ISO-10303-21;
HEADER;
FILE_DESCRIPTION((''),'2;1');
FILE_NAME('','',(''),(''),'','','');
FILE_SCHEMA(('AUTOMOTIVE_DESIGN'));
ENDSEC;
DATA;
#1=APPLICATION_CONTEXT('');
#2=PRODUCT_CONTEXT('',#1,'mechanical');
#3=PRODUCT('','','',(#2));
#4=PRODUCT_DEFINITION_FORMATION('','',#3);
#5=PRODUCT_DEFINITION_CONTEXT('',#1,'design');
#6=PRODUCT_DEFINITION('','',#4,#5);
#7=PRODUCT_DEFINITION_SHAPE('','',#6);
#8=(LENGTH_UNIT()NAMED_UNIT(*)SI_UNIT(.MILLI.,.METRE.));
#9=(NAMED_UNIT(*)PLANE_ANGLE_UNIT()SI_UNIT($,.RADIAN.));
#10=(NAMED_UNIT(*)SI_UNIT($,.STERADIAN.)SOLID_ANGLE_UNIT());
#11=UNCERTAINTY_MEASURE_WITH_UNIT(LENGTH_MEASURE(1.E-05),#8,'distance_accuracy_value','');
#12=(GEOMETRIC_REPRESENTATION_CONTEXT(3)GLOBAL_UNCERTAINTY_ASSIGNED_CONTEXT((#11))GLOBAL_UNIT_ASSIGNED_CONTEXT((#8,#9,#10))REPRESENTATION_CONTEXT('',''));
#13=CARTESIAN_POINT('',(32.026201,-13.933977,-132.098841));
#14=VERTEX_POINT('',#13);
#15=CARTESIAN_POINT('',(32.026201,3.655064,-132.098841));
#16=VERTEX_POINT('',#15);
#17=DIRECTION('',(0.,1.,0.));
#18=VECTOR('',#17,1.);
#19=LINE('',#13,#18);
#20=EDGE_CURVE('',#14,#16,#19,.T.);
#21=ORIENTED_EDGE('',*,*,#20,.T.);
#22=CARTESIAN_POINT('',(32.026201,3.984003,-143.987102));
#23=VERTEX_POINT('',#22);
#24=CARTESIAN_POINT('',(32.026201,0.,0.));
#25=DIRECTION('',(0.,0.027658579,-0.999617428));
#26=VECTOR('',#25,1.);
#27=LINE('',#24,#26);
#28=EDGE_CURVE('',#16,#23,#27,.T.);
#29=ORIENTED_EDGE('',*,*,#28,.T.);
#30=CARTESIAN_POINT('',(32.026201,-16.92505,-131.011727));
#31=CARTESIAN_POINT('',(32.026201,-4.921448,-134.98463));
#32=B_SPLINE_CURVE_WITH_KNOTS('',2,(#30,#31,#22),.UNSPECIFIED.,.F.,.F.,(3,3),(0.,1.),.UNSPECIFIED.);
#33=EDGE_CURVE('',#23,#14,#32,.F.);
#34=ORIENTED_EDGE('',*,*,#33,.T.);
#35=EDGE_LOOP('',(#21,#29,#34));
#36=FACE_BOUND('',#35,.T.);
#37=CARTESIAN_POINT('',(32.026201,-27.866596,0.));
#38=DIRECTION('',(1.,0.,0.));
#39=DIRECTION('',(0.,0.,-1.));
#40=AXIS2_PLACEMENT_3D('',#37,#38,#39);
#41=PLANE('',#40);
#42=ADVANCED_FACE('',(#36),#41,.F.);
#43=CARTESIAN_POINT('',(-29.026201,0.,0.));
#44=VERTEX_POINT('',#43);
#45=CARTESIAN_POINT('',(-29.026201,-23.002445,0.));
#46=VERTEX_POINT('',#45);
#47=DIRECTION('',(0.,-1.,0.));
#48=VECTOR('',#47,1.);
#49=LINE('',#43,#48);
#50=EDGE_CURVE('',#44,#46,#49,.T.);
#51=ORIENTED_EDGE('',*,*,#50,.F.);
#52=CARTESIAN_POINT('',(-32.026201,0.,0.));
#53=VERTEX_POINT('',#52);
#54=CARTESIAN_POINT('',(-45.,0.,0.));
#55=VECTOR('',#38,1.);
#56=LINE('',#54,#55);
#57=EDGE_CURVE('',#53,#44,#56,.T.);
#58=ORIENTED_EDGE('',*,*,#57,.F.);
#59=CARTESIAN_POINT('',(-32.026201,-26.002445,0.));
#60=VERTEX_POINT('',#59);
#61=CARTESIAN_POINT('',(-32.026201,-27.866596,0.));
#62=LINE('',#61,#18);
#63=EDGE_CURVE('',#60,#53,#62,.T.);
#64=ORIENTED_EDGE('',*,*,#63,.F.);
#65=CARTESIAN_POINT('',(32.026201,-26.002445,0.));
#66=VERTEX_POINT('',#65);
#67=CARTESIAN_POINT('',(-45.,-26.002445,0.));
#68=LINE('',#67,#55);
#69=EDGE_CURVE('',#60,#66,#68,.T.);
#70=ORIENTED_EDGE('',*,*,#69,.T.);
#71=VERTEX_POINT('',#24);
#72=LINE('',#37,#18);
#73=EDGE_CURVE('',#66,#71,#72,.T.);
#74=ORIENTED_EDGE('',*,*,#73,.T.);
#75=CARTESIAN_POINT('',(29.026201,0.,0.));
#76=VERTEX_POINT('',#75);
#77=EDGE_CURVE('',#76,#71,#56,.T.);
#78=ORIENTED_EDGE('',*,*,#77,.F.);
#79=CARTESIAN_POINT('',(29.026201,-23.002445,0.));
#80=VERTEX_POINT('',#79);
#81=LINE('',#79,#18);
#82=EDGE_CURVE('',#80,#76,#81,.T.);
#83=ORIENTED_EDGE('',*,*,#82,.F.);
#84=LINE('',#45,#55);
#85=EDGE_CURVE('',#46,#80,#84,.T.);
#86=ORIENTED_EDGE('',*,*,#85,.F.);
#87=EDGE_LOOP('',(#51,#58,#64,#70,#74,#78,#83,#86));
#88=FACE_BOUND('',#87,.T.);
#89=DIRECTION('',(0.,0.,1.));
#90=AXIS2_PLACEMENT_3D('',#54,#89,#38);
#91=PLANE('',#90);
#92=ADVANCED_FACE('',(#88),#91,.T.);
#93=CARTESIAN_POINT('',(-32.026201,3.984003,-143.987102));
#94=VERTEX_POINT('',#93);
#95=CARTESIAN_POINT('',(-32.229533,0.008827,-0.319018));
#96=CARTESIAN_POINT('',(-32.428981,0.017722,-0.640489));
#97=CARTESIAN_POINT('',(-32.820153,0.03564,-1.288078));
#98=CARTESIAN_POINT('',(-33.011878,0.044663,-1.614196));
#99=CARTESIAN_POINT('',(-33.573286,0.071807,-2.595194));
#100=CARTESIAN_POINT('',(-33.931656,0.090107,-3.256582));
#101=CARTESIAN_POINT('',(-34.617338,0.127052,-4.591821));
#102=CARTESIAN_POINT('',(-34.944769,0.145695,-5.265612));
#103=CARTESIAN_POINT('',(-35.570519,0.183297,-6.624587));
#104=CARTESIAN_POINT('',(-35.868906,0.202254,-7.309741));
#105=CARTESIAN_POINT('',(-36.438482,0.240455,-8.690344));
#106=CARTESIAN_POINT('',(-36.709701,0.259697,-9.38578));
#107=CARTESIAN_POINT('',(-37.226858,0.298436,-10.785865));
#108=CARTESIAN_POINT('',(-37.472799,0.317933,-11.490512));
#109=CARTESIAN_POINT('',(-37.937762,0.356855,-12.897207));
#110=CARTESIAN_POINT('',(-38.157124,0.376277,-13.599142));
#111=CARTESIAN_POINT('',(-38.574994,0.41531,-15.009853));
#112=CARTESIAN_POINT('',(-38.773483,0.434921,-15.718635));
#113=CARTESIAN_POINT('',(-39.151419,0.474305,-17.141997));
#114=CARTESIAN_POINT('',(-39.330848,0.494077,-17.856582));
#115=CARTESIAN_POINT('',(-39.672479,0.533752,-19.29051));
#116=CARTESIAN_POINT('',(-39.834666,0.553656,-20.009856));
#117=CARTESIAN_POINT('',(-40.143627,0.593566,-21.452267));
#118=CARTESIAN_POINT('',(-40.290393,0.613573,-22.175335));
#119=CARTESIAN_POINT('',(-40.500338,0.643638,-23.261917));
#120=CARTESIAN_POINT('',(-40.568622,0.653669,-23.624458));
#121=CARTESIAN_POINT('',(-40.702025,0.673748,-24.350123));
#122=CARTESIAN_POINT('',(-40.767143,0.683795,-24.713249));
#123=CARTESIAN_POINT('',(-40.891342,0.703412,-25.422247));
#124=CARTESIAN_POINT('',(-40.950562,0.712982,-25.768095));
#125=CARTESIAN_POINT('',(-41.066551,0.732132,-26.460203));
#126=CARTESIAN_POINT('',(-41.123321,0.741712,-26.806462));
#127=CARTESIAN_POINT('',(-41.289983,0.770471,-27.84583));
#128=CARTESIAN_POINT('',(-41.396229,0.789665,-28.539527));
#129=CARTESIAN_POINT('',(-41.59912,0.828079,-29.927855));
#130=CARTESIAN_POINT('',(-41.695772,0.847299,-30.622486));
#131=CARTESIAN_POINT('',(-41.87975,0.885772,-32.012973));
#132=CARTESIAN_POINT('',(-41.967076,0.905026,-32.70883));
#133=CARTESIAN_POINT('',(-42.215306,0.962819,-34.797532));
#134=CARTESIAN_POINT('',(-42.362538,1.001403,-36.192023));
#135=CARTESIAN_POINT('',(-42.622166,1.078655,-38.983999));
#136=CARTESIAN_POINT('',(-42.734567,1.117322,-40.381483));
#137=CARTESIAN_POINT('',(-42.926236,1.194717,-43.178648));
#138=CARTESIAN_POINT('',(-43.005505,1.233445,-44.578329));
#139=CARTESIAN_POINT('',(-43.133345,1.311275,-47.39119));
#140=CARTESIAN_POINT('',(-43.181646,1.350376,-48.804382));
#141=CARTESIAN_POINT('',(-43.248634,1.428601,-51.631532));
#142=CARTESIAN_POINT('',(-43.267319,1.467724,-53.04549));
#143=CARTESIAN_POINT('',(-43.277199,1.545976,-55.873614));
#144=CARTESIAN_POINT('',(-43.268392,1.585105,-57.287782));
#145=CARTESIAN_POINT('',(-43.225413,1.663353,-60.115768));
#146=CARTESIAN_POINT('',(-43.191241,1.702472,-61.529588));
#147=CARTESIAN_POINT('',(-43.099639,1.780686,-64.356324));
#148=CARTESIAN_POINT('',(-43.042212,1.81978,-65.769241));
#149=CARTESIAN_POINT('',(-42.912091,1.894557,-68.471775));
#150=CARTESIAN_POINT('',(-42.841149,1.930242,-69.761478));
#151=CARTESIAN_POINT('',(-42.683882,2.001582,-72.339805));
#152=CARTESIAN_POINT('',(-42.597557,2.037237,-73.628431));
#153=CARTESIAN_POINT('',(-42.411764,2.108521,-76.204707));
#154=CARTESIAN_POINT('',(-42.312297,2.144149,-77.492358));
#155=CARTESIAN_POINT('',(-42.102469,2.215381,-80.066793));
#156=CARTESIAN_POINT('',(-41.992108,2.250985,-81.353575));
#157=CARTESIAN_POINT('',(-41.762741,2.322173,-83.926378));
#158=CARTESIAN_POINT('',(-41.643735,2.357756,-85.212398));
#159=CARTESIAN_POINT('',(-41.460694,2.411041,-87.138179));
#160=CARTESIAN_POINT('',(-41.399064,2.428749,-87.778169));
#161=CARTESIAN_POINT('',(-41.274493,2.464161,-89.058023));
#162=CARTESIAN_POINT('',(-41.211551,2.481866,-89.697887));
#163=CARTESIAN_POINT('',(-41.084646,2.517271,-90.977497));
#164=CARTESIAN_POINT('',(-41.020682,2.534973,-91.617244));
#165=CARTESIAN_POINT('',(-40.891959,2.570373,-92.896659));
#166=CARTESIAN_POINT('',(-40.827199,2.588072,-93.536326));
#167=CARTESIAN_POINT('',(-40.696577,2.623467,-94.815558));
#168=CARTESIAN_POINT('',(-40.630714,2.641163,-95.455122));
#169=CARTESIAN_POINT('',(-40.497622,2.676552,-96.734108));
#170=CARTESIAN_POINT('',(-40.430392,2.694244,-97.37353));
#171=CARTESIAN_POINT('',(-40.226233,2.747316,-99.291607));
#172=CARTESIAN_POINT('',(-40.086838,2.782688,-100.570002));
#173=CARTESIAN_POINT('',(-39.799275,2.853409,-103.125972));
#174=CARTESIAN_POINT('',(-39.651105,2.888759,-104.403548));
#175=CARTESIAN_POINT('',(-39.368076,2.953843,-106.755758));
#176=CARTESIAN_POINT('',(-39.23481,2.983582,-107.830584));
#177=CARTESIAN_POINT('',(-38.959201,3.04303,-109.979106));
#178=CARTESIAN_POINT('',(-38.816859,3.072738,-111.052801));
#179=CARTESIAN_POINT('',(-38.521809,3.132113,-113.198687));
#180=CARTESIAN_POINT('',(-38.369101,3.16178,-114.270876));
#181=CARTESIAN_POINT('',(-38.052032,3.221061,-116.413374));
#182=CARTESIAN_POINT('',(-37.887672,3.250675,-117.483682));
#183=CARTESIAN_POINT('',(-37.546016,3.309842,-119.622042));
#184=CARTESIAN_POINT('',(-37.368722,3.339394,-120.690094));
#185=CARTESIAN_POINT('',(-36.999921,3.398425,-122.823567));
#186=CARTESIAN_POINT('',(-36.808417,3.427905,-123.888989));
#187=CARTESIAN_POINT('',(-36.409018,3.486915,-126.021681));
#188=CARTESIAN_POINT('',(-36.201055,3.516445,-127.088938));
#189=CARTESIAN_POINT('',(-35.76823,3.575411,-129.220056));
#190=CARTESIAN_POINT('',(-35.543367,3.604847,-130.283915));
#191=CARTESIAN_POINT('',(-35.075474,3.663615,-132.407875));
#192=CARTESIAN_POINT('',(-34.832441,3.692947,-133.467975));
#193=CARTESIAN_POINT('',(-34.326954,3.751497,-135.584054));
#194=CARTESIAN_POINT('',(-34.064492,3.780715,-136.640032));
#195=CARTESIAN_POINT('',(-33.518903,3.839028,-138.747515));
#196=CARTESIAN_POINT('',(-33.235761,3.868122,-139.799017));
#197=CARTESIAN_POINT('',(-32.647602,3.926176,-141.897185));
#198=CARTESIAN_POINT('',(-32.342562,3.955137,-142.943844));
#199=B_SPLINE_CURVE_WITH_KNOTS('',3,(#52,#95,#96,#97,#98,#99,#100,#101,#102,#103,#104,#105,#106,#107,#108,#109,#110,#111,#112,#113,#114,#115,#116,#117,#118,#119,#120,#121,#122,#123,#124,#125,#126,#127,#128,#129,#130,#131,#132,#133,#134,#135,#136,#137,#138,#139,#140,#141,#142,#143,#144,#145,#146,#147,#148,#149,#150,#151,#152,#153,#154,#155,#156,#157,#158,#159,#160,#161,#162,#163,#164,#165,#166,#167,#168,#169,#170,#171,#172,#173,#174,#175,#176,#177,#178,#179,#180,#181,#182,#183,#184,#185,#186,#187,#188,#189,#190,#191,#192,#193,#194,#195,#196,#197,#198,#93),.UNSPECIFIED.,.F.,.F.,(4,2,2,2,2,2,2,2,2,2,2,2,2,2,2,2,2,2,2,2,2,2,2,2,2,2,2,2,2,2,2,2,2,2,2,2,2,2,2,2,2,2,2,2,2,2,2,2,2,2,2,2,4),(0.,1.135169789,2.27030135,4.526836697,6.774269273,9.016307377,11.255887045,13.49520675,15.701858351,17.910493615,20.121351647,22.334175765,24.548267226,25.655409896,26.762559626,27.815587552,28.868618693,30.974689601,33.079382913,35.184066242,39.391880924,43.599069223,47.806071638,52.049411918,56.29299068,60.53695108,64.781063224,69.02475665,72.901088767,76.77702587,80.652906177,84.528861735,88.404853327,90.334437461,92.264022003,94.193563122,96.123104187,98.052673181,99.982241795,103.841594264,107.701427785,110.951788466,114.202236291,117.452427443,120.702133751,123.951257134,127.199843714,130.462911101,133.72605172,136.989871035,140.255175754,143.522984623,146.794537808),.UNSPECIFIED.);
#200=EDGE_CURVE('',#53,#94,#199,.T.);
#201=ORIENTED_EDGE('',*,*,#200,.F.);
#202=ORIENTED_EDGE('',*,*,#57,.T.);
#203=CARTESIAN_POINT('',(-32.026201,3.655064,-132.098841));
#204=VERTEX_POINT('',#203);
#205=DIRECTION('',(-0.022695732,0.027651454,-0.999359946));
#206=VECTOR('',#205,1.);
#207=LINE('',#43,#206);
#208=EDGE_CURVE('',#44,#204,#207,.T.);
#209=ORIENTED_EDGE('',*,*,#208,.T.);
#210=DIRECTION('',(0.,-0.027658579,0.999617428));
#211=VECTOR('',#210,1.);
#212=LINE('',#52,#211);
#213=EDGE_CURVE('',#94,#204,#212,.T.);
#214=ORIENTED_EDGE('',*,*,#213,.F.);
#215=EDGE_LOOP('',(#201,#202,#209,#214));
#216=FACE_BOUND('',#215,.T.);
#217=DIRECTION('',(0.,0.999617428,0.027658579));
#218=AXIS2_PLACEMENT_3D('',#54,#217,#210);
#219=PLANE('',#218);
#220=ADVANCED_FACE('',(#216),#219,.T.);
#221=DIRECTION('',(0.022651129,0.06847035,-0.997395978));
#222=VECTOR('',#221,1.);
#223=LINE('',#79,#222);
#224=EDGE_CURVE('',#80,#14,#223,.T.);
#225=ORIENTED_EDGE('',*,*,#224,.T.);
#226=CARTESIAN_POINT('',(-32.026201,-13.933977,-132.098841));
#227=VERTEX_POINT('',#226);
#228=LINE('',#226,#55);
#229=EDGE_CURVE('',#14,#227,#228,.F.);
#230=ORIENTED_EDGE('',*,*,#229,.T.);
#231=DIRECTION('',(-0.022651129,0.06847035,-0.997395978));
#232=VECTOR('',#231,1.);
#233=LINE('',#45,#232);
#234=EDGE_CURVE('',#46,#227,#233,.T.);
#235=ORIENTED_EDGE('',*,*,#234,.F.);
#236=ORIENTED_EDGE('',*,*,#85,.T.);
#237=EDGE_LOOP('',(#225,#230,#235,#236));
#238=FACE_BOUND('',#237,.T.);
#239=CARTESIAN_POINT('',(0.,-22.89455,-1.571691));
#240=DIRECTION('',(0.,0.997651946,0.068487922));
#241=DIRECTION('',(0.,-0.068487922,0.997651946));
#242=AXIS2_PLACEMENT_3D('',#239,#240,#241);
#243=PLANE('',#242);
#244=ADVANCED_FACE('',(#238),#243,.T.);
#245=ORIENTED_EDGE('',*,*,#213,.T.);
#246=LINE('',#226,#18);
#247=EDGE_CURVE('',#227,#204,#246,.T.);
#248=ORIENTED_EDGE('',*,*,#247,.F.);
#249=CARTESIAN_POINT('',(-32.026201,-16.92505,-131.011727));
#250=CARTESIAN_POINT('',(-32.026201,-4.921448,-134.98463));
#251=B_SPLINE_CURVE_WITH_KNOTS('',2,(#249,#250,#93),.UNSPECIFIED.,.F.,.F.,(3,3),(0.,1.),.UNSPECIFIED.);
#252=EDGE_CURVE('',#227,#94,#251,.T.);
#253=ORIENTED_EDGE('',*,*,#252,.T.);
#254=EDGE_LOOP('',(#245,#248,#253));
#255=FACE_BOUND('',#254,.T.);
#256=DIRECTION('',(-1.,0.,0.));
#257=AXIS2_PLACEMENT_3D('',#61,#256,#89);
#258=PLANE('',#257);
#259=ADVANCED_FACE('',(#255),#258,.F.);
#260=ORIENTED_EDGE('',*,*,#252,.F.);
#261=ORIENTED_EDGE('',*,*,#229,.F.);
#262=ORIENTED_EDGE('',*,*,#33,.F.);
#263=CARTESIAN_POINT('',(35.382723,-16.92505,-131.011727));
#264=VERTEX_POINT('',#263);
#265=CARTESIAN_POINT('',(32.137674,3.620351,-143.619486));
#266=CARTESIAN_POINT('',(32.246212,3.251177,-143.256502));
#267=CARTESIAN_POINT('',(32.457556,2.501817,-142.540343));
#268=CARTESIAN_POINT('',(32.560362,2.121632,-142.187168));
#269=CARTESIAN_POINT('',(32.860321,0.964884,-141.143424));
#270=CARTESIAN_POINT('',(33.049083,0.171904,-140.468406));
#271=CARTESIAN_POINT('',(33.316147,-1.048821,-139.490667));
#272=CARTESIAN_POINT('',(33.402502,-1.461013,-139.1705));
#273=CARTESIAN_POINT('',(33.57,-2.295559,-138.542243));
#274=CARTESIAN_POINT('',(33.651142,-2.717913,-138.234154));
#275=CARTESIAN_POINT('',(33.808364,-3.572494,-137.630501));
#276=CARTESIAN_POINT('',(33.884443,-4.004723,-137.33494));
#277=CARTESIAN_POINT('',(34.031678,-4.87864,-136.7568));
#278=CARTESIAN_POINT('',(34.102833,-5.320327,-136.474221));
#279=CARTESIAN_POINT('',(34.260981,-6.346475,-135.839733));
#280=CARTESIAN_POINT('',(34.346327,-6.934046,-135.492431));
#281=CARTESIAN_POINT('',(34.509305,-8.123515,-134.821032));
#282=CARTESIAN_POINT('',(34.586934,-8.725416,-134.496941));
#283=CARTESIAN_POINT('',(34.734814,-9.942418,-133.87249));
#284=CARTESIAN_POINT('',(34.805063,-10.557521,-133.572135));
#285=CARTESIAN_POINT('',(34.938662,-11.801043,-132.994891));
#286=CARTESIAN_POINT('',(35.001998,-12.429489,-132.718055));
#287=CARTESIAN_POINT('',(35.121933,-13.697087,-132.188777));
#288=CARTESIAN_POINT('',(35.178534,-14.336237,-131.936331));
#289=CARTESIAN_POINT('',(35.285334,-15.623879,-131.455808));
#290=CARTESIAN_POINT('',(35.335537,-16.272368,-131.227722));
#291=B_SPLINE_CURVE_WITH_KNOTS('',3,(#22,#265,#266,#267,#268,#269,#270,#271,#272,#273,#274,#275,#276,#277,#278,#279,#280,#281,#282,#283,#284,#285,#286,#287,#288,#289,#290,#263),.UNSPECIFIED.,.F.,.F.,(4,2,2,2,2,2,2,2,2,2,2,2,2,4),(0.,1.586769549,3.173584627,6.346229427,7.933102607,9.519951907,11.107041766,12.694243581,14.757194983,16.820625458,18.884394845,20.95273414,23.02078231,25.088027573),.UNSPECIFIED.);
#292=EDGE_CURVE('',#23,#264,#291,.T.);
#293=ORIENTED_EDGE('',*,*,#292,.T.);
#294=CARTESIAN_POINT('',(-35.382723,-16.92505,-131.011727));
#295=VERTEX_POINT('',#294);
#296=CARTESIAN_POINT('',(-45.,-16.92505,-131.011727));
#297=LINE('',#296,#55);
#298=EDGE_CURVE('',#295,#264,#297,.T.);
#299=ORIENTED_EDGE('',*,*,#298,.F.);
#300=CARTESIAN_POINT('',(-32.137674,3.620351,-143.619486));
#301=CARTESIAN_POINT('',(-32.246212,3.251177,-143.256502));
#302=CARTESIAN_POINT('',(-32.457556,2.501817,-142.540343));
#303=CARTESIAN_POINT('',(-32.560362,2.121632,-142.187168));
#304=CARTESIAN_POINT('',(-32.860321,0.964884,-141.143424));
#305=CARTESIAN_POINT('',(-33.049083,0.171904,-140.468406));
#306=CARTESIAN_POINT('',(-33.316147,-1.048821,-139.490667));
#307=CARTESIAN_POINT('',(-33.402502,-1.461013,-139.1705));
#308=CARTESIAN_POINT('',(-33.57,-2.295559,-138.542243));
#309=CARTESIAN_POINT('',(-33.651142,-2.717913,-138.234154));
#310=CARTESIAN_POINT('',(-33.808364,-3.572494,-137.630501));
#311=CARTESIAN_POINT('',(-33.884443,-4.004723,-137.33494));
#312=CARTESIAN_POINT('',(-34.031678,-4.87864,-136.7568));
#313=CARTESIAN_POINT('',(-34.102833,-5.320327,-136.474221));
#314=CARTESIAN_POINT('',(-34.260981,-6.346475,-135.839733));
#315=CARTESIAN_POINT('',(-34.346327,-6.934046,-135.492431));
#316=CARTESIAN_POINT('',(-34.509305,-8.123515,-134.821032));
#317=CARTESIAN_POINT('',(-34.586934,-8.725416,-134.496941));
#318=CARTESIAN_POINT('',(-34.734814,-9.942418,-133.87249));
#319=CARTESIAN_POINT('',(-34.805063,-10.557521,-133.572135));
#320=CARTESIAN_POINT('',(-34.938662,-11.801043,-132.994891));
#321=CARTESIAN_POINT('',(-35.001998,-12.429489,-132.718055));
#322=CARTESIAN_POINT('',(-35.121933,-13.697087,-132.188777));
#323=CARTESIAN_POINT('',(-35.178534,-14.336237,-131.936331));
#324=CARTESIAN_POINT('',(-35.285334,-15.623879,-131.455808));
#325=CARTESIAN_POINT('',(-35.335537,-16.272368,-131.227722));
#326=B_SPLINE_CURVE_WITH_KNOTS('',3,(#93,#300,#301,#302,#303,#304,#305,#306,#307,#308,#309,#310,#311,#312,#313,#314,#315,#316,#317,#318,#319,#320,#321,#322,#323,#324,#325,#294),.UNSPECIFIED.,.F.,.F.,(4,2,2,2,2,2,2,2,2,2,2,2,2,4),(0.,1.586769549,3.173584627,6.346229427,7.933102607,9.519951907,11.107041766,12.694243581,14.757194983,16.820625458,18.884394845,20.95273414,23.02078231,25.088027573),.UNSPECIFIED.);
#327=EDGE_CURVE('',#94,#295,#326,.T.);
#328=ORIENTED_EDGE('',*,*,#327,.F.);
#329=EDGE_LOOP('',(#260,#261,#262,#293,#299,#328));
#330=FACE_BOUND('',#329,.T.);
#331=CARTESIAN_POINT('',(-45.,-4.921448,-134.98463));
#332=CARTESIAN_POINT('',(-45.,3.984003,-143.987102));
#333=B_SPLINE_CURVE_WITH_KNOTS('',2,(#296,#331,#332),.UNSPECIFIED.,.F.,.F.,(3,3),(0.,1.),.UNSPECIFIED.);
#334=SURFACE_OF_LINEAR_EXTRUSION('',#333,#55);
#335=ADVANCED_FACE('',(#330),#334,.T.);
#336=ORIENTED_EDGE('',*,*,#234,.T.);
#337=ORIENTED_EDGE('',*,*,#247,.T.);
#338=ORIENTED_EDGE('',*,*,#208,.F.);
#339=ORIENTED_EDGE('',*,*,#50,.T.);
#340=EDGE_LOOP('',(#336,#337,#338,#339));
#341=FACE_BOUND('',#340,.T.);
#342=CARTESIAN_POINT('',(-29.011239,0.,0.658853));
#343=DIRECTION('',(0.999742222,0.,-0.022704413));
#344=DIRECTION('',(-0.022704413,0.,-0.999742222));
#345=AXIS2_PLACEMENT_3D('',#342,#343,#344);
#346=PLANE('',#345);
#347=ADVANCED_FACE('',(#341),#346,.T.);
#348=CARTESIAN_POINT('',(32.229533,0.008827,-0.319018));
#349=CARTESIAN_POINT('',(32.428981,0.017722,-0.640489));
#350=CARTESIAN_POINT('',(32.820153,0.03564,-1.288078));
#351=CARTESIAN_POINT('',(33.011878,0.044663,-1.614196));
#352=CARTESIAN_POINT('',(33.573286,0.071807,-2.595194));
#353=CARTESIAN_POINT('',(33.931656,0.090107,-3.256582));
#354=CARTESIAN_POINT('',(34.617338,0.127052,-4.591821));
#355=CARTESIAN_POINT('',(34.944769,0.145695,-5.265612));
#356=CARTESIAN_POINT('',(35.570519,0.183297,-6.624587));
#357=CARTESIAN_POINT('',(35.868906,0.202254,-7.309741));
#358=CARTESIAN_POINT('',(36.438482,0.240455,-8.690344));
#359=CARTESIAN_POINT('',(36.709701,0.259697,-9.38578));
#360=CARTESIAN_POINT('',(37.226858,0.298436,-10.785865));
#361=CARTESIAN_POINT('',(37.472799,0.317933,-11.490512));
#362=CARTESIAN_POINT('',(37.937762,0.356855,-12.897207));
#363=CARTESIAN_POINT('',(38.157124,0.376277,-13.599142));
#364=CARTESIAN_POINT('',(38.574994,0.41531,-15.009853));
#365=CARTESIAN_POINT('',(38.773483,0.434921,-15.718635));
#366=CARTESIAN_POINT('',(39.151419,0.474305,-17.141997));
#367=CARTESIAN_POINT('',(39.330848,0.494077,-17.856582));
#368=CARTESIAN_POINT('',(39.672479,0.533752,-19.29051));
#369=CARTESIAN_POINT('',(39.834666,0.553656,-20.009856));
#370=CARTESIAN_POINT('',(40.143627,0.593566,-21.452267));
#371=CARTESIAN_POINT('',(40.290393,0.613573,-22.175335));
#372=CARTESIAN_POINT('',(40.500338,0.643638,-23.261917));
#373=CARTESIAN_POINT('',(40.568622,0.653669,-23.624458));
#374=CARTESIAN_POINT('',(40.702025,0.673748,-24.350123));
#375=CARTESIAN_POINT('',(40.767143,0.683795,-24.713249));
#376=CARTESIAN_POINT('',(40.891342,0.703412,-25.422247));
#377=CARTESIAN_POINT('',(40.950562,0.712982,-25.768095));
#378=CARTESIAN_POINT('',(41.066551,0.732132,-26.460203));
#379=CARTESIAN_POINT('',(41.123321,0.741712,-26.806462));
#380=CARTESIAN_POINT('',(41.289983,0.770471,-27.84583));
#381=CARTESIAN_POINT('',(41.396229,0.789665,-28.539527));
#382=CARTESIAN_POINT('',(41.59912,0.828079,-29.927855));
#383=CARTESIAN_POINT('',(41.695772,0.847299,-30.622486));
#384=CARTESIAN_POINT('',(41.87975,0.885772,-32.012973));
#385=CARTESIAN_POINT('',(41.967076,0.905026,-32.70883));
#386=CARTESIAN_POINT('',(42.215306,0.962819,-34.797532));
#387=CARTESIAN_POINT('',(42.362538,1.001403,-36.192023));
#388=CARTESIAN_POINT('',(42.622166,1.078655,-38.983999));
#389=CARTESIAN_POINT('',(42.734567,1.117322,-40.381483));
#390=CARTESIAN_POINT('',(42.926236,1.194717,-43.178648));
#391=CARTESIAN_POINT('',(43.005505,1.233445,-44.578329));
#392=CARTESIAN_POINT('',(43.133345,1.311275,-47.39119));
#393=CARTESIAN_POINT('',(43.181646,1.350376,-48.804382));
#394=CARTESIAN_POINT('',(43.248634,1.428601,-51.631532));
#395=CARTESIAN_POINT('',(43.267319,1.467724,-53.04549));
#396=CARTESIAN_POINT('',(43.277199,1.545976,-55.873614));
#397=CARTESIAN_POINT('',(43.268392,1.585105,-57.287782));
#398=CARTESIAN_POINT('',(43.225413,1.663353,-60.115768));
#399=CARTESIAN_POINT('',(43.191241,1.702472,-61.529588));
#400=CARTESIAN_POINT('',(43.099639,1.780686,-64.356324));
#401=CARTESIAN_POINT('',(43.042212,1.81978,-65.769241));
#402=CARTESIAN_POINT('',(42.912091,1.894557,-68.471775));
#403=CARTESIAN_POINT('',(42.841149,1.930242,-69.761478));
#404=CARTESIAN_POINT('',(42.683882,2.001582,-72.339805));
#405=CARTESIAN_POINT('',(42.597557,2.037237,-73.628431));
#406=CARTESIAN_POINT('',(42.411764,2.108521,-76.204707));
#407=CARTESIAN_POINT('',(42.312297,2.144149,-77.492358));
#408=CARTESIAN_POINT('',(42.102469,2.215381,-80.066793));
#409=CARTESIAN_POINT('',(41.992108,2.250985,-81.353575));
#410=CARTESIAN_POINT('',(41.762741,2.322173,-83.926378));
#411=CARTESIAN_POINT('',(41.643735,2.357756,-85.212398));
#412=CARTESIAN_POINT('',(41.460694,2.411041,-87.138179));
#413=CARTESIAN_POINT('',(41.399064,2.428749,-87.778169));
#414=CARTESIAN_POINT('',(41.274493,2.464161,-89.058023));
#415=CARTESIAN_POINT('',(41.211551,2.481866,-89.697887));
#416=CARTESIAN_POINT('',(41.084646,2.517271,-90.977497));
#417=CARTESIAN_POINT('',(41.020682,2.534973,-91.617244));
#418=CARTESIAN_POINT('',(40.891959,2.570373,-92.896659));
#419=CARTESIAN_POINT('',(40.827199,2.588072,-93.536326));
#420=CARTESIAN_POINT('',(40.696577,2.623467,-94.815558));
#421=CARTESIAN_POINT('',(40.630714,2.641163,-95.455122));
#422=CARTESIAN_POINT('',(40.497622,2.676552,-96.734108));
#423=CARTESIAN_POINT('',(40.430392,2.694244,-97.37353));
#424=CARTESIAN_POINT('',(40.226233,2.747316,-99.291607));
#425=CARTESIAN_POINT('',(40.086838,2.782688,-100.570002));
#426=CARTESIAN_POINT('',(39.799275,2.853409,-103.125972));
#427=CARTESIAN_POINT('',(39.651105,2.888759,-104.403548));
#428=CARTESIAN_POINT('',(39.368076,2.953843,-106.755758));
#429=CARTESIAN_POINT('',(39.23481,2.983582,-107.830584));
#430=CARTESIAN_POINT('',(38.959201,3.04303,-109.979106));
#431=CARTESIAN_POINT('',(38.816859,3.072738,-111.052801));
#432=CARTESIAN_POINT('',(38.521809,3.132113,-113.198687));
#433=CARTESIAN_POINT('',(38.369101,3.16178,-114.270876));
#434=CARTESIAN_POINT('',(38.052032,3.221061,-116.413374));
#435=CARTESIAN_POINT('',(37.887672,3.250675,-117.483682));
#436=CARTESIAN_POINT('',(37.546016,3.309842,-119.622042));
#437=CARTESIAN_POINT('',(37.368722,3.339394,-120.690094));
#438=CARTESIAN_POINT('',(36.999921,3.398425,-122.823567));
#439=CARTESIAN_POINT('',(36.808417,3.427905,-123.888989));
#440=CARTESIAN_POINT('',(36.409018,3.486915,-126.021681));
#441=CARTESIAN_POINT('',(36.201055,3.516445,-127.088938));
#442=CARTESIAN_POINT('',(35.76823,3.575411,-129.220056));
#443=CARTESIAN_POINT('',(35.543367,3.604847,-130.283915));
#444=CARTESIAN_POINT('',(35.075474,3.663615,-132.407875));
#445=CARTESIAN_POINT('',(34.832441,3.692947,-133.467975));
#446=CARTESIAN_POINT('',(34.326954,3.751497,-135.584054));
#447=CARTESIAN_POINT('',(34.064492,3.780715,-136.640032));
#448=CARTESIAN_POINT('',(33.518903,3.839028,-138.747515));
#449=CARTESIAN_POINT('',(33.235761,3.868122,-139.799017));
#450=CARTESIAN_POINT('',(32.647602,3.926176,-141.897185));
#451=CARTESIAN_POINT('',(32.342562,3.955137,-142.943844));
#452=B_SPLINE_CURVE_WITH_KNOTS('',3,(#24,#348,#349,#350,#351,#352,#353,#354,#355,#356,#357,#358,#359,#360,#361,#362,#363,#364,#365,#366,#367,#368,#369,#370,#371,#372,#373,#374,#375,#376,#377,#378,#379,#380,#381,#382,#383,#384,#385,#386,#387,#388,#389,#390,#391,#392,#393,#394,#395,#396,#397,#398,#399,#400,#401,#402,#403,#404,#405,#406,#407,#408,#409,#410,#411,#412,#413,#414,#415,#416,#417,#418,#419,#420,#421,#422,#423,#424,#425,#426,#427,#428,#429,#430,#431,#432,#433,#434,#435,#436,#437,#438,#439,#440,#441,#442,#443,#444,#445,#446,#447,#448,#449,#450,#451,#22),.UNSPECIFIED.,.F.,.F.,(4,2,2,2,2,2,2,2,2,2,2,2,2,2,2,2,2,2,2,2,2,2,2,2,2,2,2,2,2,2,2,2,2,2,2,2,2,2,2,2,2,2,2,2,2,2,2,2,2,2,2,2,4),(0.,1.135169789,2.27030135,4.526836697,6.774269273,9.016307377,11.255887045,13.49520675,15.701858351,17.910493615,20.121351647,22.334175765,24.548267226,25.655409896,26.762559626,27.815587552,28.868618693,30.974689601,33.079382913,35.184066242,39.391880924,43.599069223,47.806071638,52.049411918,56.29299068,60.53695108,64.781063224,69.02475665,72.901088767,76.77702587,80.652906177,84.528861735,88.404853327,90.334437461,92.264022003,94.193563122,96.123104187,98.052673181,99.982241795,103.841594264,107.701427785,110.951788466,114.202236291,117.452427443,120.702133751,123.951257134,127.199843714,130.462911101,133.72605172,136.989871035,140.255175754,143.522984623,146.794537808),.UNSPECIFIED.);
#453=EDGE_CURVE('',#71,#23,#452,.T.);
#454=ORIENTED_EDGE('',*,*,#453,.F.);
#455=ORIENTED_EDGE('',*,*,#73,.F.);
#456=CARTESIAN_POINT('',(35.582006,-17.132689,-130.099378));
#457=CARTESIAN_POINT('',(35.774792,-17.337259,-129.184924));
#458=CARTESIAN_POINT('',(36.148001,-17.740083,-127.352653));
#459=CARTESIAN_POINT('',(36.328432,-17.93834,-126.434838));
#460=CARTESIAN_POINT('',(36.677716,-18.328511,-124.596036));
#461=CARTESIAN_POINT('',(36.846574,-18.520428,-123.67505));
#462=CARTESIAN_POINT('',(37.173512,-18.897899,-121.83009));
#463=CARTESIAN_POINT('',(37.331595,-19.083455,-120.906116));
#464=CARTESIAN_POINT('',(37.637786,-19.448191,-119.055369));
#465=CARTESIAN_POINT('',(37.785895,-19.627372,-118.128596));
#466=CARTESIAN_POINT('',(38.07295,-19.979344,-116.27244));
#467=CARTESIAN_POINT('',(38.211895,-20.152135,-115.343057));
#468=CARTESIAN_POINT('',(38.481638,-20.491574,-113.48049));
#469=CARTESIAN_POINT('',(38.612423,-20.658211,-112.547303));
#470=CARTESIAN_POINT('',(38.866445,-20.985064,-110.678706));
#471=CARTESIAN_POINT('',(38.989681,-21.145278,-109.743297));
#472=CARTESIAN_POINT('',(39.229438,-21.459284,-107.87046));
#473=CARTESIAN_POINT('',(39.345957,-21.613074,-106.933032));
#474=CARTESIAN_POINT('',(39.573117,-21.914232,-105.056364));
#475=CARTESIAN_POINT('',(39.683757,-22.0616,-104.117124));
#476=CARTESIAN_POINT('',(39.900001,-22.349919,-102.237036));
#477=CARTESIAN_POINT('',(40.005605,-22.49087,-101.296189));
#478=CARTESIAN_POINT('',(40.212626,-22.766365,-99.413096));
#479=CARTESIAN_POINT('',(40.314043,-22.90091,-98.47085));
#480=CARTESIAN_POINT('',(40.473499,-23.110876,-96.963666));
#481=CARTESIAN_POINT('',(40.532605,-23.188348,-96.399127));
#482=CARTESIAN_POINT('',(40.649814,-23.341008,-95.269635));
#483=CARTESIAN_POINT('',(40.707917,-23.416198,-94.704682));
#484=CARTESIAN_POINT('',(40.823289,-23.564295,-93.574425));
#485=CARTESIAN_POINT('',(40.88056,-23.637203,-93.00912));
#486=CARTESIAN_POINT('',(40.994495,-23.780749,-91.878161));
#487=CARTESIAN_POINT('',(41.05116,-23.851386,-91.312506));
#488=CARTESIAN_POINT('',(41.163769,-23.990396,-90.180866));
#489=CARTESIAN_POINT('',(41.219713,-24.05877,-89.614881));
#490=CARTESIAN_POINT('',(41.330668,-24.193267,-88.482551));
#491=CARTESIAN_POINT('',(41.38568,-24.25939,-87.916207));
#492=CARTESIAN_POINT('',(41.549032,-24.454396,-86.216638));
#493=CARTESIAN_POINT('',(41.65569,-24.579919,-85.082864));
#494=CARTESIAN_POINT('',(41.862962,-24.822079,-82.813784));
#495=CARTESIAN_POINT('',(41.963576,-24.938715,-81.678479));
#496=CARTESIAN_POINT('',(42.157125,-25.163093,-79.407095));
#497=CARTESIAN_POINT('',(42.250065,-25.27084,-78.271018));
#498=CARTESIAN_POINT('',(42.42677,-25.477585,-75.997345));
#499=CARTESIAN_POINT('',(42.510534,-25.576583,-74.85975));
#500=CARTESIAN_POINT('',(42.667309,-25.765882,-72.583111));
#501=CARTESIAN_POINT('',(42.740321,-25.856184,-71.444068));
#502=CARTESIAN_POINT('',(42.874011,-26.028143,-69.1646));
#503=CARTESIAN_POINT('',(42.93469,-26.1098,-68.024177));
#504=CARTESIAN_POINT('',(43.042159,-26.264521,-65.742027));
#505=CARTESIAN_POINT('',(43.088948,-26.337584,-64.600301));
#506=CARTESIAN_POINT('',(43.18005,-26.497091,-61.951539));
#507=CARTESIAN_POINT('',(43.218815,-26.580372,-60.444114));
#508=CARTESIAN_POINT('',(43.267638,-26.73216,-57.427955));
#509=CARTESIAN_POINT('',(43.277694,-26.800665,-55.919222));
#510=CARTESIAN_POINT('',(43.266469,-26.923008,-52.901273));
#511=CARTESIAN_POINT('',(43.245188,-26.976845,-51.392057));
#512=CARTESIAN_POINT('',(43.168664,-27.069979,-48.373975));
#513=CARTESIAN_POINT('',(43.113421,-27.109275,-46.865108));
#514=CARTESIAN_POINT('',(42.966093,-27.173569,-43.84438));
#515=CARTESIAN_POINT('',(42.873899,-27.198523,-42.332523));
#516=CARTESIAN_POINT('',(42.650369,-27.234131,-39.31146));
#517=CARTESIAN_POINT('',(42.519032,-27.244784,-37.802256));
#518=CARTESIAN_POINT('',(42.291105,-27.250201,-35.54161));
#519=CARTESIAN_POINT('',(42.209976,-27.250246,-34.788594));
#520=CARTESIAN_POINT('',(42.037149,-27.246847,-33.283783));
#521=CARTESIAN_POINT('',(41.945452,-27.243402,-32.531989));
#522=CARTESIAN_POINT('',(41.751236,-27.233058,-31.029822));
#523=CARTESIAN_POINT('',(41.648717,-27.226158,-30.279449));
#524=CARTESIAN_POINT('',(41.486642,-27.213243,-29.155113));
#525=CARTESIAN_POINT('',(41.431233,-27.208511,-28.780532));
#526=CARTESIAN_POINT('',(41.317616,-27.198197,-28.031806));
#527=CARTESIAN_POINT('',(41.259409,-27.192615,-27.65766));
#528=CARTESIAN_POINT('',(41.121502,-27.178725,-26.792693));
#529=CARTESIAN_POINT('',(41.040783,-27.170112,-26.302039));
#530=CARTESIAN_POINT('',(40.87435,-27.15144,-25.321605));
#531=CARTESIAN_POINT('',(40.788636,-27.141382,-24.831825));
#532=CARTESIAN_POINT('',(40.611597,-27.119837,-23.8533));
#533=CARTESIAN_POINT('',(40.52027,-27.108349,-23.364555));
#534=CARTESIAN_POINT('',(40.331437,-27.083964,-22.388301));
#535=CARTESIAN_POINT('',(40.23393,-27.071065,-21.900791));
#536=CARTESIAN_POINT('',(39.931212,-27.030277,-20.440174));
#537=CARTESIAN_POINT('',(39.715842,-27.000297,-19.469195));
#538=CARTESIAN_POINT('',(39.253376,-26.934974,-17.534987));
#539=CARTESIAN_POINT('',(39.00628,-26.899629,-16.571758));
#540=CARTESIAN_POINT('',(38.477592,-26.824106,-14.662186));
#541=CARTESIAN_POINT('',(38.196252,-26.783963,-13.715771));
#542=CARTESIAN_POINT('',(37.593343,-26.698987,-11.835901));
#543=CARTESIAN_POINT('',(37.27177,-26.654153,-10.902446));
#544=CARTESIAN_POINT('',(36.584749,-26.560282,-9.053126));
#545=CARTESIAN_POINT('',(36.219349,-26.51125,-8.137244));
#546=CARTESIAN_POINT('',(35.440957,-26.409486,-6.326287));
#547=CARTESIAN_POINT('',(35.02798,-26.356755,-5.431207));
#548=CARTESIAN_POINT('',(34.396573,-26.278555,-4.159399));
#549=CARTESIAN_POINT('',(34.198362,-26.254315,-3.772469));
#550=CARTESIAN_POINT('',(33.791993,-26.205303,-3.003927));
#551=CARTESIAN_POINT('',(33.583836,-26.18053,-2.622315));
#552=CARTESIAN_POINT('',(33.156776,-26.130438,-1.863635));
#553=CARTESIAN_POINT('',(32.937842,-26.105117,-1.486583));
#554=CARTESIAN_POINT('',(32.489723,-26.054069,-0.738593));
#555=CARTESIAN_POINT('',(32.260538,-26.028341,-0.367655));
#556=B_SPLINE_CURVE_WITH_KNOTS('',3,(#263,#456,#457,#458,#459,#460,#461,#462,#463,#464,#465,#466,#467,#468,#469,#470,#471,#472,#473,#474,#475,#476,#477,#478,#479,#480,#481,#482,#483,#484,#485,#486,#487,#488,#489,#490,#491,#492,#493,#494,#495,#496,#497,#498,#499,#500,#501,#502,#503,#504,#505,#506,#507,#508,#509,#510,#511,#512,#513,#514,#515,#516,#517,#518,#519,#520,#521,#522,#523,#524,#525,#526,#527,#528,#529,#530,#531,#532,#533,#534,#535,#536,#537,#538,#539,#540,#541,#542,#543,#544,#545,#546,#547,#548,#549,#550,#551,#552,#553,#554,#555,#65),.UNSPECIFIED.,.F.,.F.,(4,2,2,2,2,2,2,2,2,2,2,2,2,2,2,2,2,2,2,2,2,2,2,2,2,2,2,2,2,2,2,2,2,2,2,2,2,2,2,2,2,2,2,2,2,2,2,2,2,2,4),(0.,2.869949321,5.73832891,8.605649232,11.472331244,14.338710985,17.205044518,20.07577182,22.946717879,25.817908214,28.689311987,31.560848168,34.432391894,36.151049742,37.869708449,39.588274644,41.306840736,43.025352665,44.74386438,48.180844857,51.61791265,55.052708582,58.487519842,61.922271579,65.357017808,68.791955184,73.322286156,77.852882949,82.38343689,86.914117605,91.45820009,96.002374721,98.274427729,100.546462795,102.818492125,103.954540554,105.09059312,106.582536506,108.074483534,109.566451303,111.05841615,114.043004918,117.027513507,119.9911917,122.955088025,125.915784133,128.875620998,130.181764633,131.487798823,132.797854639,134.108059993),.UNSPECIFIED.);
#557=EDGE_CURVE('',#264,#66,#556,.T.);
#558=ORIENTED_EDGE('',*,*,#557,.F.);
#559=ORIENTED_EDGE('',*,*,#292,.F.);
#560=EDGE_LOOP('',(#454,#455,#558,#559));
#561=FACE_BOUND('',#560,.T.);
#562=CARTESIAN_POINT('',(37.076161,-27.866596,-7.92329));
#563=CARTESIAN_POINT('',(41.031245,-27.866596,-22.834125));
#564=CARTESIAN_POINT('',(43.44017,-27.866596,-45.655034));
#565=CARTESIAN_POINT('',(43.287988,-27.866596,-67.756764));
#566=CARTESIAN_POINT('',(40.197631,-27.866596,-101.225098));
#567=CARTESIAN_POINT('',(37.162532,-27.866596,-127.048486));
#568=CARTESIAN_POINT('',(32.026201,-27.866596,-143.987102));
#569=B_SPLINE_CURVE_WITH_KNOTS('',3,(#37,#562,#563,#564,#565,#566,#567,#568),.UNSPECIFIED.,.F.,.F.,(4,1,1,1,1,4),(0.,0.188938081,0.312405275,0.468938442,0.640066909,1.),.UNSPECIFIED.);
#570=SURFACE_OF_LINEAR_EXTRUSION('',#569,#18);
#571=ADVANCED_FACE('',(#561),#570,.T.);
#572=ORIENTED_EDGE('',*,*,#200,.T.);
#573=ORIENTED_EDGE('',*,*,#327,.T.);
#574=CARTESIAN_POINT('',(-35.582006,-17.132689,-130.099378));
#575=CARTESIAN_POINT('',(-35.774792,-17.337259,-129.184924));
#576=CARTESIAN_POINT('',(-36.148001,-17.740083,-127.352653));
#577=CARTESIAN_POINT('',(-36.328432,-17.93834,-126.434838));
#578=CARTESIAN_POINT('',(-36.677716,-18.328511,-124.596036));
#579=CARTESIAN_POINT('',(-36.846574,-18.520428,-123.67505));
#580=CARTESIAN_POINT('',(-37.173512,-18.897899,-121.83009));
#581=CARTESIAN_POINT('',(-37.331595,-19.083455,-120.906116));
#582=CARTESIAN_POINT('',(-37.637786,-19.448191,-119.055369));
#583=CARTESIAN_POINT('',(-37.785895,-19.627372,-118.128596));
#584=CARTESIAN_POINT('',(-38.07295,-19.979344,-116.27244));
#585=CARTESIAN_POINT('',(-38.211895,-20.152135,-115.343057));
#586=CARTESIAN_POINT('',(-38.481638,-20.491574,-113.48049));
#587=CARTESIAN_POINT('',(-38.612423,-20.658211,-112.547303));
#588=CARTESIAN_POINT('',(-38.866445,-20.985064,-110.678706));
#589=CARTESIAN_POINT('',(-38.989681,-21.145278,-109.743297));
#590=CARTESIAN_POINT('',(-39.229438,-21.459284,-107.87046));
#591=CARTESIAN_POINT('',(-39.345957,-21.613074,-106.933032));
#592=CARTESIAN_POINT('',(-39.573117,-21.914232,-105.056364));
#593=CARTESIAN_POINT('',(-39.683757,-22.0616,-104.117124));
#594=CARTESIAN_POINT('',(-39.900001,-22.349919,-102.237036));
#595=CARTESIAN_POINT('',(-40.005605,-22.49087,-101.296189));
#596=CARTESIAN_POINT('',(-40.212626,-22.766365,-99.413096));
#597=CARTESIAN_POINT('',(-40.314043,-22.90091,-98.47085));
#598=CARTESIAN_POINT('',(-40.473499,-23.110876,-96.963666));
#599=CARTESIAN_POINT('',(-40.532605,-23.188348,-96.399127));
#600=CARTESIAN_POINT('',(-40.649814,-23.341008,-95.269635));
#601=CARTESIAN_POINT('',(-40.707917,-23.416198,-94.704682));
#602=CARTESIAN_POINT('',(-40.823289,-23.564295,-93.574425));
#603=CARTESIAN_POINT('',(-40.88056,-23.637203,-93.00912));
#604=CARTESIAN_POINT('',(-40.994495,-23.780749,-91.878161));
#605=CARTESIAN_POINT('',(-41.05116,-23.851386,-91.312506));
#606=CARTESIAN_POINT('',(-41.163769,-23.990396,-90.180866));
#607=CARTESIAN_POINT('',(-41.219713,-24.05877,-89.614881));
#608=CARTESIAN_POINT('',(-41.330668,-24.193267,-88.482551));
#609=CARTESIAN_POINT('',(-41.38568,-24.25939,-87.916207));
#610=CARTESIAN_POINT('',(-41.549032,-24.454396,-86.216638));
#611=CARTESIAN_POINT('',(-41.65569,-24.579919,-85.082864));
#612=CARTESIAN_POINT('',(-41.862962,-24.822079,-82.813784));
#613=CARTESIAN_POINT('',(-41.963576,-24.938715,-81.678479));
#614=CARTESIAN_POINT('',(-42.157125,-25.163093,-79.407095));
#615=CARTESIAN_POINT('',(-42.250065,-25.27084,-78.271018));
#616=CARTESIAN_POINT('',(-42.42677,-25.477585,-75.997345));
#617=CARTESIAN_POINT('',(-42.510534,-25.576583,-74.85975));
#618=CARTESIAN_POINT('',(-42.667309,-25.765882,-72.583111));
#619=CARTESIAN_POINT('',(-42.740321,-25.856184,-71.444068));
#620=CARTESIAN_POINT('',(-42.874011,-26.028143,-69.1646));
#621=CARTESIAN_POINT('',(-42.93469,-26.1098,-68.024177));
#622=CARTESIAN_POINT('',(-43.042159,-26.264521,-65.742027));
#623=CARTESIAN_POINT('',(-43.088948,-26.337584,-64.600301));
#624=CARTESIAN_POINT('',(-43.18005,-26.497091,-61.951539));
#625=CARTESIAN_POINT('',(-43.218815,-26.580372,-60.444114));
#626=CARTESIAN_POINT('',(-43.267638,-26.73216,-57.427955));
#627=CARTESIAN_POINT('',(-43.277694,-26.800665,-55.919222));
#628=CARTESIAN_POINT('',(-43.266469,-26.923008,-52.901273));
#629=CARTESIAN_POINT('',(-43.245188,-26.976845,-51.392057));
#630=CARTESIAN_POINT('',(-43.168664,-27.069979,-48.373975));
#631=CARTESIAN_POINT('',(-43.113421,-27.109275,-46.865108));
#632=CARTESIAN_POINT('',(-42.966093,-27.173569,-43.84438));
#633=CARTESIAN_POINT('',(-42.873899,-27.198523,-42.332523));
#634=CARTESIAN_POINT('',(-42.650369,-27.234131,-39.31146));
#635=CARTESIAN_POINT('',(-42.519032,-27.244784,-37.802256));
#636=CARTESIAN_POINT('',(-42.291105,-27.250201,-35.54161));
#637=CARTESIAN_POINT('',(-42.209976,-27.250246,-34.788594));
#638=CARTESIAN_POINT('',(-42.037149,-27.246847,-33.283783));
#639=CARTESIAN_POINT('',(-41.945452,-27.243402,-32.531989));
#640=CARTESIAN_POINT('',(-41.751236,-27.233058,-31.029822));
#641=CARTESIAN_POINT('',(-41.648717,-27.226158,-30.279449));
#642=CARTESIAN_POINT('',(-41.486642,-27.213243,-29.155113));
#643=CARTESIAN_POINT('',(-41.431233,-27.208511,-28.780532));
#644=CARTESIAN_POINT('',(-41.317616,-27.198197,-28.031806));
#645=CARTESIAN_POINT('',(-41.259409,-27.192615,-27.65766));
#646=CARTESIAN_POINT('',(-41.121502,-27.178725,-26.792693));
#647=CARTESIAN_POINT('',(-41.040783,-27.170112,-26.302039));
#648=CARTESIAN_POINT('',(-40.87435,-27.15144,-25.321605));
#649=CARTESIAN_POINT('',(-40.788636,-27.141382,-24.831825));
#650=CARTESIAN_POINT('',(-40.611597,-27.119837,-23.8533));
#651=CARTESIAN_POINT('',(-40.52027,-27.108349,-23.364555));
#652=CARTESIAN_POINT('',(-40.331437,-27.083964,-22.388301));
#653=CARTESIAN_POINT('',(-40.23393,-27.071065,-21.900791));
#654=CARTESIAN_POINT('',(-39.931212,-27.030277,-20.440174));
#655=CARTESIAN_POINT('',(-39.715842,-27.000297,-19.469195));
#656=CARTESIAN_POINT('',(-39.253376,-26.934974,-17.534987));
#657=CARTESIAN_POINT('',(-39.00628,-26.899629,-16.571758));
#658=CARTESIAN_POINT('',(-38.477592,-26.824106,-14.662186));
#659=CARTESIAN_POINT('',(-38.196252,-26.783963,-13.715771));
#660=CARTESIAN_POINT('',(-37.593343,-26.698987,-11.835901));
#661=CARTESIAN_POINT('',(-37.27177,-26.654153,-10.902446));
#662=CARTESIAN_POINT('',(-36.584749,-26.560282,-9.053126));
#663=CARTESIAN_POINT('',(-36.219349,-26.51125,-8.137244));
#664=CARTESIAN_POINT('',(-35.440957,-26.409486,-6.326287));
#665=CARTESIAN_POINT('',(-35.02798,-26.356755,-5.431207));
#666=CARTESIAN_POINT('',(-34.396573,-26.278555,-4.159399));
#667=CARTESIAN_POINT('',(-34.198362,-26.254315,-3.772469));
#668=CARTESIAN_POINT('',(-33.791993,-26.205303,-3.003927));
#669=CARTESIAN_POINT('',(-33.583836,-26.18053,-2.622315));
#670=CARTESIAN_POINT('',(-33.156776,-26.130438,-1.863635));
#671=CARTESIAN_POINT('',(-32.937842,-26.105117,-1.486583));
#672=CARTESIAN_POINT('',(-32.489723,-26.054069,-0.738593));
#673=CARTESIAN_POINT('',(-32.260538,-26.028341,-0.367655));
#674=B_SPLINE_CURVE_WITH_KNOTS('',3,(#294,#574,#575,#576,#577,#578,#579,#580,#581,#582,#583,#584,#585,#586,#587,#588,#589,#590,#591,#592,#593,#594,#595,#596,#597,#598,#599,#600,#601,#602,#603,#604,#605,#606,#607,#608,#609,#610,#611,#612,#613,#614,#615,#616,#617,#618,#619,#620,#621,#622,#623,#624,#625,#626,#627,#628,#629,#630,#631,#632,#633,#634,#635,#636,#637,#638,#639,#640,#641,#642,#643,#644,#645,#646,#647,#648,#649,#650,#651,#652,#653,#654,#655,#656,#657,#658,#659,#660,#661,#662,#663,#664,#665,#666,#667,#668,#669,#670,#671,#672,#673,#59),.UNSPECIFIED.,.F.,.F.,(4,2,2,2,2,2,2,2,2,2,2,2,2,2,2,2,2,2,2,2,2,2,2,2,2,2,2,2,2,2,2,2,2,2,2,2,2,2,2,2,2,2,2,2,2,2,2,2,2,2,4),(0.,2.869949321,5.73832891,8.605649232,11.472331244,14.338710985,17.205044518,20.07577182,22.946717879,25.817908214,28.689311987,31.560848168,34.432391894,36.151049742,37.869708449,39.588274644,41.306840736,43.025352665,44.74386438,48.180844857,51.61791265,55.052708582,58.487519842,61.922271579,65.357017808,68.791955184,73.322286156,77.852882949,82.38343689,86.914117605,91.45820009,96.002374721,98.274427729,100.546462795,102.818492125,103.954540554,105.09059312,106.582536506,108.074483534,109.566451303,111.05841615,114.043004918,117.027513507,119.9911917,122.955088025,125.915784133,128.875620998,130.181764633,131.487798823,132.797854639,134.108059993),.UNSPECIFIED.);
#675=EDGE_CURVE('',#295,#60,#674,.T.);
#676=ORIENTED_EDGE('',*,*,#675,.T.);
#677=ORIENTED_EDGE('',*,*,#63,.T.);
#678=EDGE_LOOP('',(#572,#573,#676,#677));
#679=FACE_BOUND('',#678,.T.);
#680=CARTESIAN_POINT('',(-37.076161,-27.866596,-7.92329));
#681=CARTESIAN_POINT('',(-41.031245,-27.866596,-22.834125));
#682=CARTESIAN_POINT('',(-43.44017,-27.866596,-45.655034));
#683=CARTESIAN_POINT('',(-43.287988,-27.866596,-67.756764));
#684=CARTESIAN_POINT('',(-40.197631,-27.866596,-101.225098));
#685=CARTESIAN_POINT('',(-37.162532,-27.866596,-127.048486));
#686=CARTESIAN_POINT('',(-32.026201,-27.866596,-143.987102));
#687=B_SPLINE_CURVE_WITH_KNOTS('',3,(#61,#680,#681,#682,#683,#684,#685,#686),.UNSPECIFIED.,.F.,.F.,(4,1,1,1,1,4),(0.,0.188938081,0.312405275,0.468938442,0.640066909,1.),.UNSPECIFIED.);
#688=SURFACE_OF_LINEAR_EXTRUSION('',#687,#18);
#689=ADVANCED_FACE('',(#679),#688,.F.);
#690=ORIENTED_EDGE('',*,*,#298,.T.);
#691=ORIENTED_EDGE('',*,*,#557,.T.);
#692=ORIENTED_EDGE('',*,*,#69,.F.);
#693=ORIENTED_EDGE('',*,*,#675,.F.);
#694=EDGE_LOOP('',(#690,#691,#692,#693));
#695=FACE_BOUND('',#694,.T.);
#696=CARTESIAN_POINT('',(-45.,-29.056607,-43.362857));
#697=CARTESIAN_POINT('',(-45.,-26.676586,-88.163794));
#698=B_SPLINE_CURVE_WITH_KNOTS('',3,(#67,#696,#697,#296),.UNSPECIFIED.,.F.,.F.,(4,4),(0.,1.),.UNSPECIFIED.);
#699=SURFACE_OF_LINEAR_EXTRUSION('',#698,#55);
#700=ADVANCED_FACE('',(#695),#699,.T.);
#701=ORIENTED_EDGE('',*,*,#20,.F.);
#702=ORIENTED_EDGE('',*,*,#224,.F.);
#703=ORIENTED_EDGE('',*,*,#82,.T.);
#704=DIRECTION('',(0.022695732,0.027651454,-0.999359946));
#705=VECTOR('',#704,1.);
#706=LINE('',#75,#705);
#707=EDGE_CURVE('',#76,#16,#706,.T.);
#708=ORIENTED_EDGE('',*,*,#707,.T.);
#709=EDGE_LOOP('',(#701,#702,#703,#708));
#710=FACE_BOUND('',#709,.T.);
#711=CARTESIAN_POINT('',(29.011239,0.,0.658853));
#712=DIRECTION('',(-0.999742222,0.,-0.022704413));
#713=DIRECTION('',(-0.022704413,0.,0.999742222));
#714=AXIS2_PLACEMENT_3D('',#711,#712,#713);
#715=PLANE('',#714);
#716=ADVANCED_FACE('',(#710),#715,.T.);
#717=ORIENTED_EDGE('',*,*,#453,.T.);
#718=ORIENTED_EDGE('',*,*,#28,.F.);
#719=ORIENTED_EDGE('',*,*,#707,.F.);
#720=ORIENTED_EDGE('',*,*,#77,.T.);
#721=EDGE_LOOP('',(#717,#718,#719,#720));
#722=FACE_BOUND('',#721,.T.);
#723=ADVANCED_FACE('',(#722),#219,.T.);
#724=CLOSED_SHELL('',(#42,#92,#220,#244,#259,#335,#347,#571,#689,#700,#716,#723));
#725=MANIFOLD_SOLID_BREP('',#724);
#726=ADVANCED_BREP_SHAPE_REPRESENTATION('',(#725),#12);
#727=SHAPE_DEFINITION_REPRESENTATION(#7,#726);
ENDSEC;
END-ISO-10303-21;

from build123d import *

# Parameters (mm, degrees)
BOSS_EXTRUDE2_DEPTH      = 45
BOSS_EXTRUDE2_DEPTH_BACK = 45
CUT_EXTRUDE3_START       = -27.249786541
CUT_EXTRUDE3_DEPTH       = 31.233789291


# Read off the part's stored shape, not the designer's step: Cut-Extrude3
with BuildPart() as part:
    # Sketch2 (on Right Plane) → Boss-Extrude2 (new, two sides: drawn at the far end of the back side and taken through both)
    with BuildSketch(Plane(origin=(0, 0, 0), x_dir=(0, 0, -1), z_dir=(1, 0, 0)).offset(-BOSS_EXTRUDE2_DEPTH_BACK)):
        with BuildLine():
            Line((0, 0), (143.987102048, 3.98400275))
            add(Edge.make_bspline(
                [(143.987102048, 3.98400275), (134.984630488, -4.921448011), (131.011727331, -16.925050269)],
                knots=[0, 0, 0, 1, 1, 1], degree=2))
            add(Edge.make_bspline(
                [(0, -26.002445347), (43.362857404, -29.056607153), (88.163793894, -26.676585526), (131.011727331, -16.925050269)],
                knots=[0, 0, 0, 0, 1, 1, 1, 1], degree=3))
            Line((0, -26.002445347), (0, 0))
        make_face()
    extrude(amount=BOSS_EXTRUDE2_DEPTH + BOSS_EXTRUDE2_DEPTH_BACK)

    # Cut-Extrude3 outline → Cut-Extrude3 (cut)
    with BuildSketch(Plane(origin=(0, 0, 0), x_dir=(1, 0, 0), z_dir=(0, 1, 0)).offset(CUT_EXTRUDE3_START)):
        with BuildLine():
            add(Edge.make_bspline(
                [(32.026201302, 0), (37.076161421, 7.923289645), (41.031245364, 22.834124934), (43.440169572, 45.655033799), (43.287987849, 67.756764471), (40.19763091, 101.225098423), (37.162532459, 127.048485942), (32.026201302, 143.987102048)],
                knots=[0, 0, 0, 0, 0.188938081, 0.312405275, 0.468938442, 0.640066909, 1, 1, 1, 1], degree=3))
            Line((32.026201302, 0), (45, 0))
            Line((45, 0), (45, 145))
            Line((45, 145), (-45, 145))
            Line((-45, 145), (-45, 0))
            Line((-45, 0), (-32.026201302, 0))
            add(Edge.make_bspline(
                [(-32.026201302, 0), (-37.076161421, 7.923289645), (-41.031245364, 22.834124934), (-43.440169572, 45.655033799), (-43.287987849, 67.756764471), (-40.19763091, 101.225098423), (-37.162532459, 127.048485942), (-32.026201302, 143.987102048)],
                knots=[0, 0, 0, 0, 0.188938081, 0.312405275, 0.468938442, 0.640066909, 1, 1, 1, 1], degree=3))
            Line((-32.026201302, 143.987102048), (-32.026201302, 132.09884068))
            Line((-32.026201302, 132.09884068), (32.026201302, 132.09884068))
            Line((32.026201302, 132.09884068), (32.026201302, 143.987102048))
        make_face()
    extrude(amount=CUT_EXTRUDE3_DEPTH, mode=Mode.SUBTRACT)

    # Sketch6 → Cut-Loft1 section 0
    with BuildSketch(Plane.XY):
        with BuildLine():
            Line((-29.026201302, 0), (-29.026201302, -23.002445347))
            Line((-29.026201302, -23.002445347), (29.026201302, -23.002445347))
            Line((29.026201302, -23.002445347), (29.026201302, 0))
            Line((29.026201302, 0), (-29.026201302, 0))
        make_face()
    # Sketch5 → Cut-Loft1 section 1
    with BuildSketch(Plane(origin=(0, 0, -132.09884068), x_dir=(-1, 0, 0), z_dir=(0, 0, -1))):
        with BuildLine():
            Line((-32.026201302, -13.933976996), (32.026201302, -13.933976996))
            Line((32.026201302, -13.933976996), (32.026201302, 3.655064496))
            Line((32.026201302, 3.655064496), (-32.026201302, 3.655064496))
            Line((-32.026201302, 3.655064496), (-32.026201302, -13.933976996))
        make_face()
    loft(mode=Mode.SUBTRACT)


solid = part.part
